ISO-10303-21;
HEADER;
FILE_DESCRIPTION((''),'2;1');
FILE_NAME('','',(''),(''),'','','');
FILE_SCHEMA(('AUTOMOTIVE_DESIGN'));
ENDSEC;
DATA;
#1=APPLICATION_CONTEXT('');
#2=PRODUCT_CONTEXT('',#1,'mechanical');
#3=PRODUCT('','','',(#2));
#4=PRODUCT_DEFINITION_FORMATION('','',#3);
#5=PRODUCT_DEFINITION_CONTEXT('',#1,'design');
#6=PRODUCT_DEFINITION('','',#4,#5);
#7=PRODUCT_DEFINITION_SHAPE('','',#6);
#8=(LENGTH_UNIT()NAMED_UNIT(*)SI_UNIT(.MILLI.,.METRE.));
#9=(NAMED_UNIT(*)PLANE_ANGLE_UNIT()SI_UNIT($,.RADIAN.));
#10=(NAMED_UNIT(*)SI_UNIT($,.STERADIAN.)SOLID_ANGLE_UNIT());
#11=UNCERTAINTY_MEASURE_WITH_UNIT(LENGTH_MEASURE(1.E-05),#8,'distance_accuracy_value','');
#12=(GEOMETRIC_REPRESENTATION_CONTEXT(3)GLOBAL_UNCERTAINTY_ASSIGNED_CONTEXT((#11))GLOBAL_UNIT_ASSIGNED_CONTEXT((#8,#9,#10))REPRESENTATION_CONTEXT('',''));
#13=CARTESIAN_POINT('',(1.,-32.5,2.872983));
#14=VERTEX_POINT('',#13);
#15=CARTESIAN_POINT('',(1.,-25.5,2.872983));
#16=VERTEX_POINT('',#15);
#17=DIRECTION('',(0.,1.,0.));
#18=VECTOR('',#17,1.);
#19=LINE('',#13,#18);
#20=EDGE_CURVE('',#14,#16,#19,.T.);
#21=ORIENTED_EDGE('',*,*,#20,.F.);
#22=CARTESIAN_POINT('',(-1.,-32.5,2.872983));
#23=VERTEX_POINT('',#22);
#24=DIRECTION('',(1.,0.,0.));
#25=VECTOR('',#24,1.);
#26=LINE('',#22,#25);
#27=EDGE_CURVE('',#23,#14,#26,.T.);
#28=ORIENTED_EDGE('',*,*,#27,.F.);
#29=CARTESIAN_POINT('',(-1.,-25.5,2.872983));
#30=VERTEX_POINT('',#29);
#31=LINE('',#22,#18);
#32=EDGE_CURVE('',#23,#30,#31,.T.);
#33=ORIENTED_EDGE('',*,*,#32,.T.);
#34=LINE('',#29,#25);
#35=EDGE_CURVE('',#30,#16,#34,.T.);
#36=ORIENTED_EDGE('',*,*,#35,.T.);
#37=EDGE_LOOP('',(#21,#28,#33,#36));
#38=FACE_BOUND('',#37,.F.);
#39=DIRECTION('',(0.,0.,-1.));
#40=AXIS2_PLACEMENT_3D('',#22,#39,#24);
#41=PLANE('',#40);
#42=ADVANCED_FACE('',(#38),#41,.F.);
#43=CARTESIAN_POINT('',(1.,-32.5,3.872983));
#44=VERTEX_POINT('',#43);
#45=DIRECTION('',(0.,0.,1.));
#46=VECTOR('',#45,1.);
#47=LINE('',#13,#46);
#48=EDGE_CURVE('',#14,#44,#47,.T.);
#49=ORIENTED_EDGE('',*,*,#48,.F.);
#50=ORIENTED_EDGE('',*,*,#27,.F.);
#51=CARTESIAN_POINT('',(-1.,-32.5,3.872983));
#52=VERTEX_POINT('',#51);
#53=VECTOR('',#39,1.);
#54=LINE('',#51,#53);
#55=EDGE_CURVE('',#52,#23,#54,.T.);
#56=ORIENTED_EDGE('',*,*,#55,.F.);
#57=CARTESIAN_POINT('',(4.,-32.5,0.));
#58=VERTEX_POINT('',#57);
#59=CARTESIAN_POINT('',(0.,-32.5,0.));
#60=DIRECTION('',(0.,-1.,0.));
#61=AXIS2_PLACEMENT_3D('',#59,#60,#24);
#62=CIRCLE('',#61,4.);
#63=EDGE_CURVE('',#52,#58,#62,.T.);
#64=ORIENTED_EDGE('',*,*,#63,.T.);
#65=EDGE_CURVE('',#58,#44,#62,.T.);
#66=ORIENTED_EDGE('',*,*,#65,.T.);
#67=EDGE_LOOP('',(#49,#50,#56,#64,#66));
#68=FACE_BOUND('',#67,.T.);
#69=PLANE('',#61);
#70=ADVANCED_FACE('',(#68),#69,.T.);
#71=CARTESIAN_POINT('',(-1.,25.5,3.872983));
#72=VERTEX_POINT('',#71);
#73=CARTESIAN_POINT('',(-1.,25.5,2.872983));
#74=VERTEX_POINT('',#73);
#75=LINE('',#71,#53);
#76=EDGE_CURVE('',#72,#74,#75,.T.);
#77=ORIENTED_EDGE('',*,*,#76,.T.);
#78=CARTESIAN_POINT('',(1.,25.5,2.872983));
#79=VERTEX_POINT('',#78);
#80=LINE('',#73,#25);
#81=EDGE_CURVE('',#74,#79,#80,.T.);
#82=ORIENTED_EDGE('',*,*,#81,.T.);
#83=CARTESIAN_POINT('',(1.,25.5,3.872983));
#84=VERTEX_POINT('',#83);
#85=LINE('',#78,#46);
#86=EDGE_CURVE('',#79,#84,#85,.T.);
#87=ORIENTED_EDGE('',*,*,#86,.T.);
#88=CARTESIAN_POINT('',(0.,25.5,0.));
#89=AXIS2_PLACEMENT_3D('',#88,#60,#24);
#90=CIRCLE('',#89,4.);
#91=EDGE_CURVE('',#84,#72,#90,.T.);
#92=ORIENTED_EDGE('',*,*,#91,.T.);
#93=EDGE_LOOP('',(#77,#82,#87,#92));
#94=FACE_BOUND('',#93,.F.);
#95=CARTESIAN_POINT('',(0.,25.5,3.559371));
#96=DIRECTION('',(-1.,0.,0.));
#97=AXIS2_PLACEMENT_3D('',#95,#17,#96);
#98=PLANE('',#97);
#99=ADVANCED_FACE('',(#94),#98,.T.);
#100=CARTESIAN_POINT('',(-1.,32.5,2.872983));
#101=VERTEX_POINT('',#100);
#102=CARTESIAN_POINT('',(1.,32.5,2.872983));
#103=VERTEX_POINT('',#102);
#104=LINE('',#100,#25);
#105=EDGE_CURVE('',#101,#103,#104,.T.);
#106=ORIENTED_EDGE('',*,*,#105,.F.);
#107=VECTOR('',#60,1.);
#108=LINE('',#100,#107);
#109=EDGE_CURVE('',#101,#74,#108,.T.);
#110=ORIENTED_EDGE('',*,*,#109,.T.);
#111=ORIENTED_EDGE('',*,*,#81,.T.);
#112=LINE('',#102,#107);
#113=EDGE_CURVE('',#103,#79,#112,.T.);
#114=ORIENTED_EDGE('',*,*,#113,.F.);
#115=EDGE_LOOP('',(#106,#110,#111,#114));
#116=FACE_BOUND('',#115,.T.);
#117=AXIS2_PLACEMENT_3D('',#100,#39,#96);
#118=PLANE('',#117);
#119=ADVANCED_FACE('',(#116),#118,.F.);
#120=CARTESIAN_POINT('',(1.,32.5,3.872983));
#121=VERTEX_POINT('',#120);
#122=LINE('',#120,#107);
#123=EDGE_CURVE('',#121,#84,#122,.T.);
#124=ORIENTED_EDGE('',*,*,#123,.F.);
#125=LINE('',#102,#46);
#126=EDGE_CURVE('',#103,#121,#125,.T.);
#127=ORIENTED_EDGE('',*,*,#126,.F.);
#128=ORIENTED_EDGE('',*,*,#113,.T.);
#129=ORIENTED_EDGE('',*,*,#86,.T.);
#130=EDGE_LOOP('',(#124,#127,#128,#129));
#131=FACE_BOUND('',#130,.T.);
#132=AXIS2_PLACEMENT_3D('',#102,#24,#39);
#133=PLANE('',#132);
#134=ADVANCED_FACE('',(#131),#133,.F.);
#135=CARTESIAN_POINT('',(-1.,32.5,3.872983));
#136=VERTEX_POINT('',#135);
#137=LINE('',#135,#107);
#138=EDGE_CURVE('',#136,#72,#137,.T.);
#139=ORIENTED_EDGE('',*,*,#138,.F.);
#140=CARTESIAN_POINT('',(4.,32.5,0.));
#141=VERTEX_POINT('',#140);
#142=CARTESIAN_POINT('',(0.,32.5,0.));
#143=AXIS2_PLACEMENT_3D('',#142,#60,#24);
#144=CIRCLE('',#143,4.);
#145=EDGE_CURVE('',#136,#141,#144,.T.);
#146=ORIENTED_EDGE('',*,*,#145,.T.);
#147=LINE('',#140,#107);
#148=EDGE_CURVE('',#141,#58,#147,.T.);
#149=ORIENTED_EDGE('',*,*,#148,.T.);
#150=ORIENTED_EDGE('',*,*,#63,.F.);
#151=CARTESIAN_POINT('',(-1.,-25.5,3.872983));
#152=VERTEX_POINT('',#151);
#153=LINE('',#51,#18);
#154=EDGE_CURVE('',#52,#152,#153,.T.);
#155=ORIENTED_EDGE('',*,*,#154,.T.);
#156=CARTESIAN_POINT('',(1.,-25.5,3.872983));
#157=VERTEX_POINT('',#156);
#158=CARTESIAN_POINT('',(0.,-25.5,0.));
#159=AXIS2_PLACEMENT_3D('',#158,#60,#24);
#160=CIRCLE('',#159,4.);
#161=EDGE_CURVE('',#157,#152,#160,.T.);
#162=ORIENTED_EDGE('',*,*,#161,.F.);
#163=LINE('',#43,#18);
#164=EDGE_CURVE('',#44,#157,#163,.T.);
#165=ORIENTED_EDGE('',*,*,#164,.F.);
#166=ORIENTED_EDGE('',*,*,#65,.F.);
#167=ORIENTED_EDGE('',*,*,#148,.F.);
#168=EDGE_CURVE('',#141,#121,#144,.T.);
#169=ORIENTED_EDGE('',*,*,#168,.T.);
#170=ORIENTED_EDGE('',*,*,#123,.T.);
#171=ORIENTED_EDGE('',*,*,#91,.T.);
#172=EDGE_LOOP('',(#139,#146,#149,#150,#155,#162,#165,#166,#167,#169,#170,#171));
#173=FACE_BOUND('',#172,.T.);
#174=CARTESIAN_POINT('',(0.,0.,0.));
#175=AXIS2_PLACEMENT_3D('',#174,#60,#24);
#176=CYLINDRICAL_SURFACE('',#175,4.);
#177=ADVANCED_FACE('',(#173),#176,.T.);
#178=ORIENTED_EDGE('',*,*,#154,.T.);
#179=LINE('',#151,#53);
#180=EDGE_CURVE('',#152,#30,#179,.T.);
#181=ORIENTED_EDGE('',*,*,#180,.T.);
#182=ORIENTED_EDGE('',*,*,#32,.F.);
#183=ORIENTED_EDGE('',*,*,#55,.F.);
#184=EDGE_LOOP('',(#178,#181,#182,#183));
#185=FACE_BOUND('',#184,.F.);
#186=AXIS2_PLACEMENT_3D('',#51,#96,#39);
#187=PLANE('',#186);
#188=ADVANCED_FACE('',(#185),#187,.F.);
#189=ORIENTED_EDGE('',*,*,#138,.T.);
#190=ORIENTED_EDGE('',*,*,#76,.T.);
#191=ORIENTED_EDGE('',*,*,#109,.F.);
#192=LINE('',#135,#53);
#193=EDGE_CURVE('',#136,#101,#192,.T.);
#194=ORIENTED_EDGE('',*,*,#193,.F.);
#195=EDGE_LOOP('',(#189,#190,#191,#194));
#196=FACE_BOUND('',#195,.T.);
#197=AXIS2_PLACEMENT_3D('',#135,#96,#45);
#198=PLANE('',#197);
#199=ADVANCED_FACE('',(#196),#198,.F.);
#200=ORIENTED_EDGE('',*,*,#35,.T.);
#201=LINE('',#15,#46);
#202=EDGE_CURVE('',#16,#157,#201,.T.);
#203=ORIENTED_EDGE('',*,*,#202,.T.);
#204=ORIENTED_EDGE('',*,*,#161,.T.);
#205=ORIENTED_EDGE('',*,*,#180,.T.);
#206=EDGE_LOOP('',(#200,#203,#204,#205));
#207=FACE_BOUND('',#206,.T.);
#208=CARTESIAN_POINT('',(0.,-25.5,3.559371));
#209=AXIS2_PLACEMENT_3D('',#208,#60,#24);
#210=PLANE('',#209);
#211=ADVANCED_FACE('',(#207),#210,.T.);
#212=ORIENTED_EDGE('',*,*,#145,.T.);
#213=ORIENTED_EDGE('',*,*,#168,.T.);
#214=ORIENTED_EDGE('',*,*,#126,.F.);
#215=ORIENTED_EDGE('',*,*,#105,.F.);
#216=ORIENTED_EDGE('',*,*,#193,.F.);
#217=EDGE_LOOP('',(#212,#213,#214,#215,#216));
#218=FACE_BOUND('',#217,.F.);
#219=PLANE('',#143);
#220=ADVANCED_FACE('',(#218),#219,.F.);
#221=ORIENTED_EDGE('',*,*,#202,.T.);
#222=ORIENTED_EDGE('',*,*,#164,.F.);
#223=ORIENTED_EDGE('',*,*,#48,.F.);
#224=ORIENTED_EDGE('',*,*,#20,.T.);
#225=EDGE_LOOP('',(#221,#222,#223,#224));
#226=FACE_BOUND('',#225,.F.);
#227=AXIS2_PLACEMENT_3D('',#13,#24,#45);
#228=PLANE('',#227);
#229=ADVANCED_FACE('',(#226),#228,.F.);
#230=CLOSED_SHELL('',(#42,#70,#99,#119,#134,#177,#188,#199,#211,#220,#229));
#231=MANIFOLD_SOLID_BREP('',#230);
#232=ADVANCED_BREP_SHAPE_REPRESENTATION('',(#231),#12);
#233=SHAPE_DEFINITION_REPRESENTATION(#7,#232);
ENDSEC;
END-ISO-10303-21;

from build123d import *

# Parameters (mm, degrees)
F0_R     = 4
F1_DEPTH = 32.5
F3_DEPTH = 7


# Not quite as in the source:
# - a pattern or mirror of a feature is missing from the dataset's text; its kind, count and spacing are read off the source's solid


with BuildPart() as f1:
    # F0 (on Front) → F1 (new body, symmetric)
    with BuildSketch(Plane.XZ):
        Circle(F0_R)
    extrude(amount=F1_DEPTH, both=True)

    # F2 (on face) → F3 (cut)
    with BuildSketch(Plane.XZ.offset(32.5)):
        Polygon((0, 4.634491168), (-1, 3.8729833462), (-1, 2.8729833462), (1, 2.8729833462), (1, 3.8729833462), align=None)
    f3 = extrude(amount=-F3_DEPTH, mode=Mode.SUBTRACT)

    # F3_copies: F3 across plane
    add(f3.mirror(Plane.ZX), mode=Mode.SUBTRACT)


solid = f1.part
